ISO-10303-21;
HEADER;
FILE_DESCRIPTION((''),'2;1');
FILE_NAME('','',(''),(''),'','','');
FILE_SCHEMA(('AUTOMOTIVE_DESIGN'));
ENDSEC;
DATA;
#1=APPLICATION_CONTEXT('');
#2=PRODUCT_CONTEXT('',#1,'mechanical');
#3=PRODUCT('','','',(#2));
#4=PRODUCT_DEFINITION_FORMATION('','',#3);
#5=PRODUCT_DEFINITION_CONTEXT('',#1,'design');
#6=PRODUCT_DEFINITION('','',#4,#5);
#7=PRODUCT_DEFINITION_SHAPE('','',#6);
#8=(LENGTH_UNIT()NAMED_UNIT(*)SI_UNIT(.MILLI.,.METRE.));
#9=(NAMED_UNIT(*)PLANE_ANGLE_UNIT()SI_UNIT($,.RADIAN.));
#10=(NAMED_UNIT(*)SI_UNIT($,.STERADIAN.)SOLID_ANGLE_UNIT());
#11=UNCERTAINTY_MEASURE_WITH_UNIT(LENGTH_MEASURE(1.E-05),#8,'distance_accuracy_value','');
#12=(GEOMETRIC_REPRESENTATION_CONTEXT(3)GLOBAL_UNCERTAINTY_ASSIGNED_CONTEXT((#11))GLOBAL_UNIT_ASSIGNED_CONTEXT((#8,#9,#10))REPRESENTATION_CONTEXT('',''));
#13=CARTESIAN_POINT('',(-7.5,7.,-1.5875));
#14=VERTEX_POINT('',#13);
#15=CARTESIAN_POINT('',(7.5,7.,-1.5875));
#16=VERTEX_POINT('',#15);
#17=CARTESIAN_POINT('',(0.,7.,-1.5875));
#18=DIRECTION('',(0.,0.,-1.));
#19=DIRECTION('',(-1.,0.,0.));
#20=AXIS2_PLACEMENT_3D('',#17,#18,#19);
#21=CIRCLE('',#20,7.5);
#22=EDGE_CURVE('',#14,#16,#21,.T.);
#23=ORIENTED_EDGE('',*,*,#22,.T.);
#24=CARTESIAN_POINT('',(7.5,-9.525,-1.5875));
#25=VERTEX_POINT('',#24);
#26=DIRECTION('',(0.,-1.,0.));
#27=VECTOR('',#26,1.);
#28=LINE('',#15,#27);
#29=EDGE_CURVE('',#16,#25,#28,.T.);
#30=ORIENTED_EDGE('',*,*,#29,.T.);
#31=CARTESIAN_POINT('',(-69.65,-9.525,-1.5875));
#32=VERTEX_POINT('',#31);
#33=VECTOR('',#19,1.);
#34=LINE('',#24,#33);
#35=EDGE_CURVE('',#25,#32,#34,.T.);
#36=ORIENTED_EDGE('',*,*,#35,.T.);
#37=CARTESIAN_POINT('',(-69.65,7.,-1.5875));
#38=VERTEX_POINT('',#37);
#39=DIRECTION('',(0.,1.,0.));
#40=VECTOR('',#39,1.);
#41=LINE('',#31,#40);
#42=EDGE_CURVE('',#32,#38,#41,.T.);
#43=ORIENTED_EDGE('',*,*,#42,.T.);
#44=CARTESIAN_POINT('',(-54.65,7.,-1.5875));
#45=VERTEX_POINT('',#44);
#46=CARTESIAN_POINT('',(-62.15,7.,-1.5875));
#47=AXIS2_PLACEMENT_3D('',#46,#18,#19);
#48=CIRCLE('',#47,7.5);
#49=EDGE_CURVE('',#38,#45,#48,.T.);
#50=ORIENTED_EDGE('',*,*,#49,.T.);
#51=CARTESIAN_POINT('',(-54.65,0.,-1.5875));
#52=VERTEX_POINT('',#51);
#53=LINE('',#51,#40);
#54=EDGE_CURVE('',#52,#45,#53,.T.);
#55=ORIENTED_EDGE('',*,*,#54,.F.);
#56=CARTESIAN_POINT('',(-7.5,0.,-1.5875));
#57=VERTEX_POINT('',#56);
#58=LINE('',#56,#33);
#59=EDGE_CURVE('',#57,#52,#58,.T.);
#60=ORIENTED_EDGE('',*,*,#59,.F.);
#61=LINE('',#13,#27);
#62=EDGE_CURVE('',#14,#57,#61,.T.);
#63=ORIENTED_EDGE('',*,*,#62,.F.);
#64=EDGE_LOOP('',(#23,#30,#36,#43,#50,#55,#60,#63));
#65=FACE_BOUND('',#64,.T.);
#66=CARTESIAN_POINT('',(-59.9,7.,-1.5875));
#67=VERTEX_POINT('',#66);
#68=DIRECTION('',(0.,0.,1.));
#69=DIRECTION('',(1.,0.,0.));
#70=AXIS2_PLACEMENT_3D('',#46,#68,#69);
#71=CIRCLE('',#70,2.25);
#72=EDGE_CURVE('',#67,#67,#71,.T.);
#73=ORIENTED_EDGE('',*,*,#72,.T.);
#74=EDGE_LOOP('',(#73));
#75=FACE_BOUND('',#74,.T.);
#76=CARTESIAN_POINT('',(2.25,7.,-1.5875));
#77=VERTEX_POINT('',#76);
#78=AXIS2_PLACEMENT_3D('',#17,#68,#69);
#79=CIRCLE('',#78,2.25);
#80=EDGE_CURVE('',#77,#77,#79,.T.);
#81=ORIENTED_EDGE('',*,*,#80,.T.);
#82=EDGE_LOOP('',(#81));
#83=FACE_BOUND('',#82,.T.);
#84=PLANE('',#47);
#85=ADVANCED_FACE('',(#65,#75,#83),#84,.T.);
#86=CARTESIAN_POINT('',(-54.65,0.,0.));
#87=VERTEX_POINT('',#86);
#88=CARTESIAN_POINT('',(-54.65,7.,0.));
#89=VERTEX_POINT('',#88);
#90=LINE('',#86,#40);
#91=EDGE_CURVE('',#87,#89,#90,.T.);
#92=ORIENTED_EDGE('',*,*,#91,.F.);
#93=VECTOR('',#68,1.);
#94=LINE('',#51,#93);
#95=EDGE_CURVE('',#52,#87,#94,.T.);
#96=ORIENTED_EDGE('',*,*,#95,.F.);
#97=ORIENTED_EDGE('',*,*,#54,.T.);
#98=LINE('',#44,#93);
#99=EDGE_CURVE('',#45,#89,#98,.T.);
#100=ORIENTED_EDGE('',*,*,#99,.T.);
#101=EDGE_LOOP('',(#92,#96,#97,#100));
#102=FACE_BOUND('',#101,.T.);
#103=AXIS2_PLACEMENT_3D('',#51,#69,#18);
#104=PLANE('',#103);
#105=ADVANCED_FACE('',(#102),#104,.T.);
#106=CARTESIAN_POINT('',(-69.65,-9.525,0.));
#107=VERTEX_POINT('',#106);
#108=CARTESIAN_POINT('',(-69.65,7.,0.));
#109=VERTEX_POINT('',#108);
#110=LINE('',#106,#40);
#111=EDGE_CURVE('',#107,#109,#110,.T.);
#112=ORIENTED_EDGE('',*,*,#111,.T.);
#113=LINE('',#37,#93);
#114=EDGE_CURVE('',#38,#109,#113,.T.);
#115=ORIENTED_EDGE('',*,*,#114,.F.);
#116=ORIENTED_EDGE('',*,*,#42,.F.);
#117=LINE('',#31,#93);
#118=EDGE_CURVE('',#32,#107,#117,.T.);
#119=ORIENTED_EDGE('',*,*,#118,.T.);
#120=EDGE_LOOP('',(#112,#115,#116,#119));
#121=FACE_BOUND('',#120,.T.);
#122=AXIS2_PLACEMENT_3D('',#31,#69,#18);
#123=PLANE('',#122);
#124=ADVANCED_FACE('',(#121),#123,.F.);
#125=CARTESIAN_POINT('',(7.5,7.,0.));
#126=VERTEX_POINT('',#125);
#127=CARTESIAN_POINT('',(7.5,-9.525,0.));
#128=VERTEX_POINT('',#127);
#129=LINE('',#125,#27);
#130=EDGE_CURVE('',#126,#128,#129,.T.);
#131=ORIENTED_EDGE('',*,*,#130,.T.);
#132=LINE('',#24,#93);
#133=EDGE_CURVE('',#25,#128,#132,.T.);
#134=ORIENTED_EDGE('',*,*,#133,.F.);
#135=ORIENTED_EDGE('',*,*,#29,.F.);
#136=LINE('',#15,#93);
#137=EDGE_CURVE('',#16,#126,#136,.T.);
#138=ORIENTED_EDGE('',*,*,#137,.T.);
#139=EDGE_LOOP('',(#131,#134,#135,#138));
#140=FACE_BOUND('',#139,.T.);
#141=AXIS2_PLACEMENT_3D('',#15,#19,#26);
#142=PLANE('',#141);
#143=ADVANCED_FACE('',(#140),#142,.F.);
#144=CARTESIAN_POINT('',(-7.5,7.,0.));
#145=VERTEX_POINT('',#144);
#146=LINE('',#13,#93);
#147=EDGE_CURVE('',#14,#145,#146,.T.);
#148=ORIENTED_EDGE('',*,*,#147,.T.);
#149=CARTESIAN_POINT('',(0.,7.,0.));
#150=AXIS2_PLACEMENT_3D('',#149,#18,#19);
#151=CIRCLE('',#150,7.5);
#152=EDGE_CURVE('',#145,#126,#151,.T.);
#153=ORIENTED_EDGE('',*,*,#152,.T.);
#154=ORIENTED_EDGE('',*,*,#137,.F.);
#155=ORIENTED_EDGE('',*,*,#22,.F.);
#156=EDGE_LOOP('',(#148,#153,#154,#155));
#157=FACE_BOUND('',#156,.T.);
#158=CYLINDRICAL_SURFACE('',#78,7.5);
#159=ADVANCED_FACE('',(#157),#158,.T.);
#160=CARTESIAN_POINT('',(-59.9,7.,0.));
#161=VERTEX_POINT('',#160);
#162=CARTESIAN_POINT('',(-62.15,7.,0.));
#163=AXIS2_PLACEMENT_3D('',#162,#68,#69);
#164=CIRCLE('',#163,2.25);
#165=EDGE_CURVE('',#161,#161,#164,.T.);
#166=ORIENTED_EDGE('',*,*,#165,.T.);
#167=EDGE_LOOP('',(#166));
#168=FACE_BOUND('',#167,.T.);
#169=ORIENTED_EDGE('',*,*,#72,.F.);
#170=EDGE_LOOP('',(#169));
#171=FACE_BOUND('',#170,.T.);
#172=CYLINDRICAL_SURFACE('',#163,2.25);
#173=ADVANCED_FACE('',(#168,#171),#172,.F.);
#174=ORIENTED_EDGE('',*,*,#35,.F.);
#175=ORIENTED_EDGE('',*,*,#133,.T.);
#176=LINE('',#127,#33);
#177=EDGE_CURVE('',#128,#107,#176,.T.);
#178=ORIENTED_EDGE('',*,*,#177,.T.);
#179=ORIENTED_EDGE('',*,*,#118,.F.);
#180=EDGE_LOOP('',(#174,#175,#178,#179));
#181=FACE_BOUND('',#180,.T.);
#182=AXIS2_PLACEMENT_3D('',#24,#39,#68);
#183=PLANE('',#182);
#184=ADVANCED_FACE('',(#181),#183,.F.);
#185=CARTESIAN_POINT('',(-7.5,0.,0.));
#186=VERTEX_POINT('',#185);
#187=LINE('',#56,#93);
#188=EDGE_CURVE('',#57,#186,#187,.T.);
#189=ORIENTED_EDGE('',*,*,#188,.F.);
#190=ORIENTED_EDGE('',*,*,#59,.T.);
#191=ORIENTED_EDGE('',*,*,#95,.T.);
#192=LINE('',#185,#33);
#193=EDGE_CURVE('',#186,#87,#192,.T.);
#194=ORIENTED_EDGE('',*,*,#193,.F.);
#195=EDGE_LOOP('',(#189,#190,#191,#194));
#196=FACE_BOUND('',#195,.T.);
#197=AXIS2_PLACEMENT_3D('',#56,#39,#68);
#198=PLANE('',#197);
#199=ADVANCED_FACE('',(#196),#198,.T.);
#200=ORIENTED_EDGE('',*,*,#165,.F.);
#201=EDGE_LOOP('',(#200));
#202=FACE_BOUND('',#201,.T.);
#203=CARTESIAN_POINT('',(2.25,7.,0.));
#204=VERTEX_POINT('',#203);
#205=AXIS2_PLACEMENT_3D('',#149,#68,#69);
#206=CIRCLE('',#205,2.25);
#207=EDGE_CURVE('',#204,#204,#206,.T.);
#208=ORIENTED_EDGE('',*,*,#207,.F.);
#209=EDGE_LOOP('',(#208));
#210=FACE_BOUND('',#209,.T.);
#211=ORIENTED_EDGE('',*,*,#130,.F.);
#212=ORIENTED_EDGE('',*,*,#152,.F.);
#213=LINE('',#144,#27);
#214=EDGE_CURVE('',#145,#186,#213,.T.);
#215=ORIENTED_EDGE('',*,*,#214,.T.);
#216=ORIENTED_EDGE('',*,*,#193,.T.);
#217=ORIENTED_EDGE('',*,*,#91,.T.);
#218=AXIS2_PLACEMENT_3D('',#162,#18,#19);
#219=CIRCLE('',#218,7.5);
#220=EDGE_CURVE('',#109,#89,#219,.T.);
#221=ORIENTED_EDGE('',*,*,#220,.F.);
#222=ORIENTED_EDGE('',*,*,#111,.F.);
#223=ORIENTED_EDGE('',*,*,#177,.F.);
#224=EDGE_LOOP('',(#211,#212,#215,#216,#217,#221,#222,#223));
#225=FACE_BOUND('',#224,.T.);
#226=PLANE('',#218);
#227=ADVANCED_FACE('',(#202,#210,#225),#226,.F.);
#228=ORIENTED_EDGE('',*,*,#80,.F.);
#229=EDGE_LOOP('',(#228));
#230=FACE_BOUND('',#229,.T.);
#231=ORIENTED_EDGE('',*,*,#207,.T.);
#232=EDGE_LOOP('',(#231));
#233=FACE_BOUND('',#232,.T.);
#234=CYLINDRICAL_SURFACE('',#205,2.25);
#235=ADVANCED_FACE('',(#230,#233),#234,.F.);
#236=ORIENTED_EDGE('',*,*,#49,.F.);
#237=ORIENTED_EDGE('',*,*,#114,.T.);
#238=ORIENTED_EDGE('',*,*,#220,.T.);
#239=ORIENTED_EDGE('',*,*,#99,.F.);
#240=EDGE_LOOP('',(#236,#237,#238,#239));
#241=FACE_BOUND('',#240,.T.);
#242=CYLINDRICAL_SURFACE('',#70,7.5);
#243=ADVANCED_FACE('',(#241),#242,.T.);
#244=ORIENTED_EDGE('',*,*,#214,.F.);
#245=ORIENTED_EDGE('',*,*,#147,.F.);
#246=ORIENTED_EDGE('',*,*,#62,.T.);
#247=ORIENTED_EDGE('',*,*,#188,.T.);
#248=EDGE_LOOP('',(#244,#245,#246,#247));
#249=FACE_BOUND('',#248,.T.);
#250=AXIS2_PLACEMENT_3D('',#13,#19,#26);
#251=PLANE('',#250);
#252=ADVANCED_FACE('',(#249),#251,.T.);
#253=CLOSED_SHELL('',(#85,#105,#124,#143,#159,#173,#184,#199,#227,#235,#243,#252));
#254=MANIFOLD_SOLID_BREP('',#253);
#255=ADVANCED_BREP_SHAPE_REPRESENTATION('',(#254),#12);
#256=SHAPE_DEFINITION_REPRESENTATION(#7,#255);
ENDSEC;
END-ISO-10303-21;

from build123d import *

# Parameters (mm, degrees)
BASE_FLANGE2_DEPTH   = 1.5875
M4_CLEARANCE_HOLE1_D = 4.5


# Read off the part's stored shape, not the designer's step: Base-Flange2
with BuildPart() as part:
    # Base-Flange2 outline → Base-Flange2 (new body)
    with BuildSketch(Plane(origin=(0, 0, 0), x_dir=(-1, 0, 0), z_dir=(0, 0, -1))):
        with BuildLine():
            Line((69.65, -9.525), (69.65, 7))
            ThreePointArc((69.65, 7), (62.15, 14.5), (54.65, 7))
            Line((54.65, 7), (54.65, 0))
            Line((54.65, 0), (7.5, 0))
            Line((7.5, 0), (7.5, 7))
            ThreePointArc((7.5, 7), (0, 14.5), (-7.5, 7))
            Line((-7.5, 7), (-7.5, -9.525))
            Line((-7.5, -9.525), (69.65, -9.525))
        make_face()
    extrude(amount=BASE_FLANGE2_DEPTH)

    # M4 Clearance Hole1 (through all)
    with Locations(Plane.XY):
        with Locations((0, 7), (-62.15, 7)):
            Hole(M4_CLEARANCE_HOLE1_D / 2)


solid = part.part
